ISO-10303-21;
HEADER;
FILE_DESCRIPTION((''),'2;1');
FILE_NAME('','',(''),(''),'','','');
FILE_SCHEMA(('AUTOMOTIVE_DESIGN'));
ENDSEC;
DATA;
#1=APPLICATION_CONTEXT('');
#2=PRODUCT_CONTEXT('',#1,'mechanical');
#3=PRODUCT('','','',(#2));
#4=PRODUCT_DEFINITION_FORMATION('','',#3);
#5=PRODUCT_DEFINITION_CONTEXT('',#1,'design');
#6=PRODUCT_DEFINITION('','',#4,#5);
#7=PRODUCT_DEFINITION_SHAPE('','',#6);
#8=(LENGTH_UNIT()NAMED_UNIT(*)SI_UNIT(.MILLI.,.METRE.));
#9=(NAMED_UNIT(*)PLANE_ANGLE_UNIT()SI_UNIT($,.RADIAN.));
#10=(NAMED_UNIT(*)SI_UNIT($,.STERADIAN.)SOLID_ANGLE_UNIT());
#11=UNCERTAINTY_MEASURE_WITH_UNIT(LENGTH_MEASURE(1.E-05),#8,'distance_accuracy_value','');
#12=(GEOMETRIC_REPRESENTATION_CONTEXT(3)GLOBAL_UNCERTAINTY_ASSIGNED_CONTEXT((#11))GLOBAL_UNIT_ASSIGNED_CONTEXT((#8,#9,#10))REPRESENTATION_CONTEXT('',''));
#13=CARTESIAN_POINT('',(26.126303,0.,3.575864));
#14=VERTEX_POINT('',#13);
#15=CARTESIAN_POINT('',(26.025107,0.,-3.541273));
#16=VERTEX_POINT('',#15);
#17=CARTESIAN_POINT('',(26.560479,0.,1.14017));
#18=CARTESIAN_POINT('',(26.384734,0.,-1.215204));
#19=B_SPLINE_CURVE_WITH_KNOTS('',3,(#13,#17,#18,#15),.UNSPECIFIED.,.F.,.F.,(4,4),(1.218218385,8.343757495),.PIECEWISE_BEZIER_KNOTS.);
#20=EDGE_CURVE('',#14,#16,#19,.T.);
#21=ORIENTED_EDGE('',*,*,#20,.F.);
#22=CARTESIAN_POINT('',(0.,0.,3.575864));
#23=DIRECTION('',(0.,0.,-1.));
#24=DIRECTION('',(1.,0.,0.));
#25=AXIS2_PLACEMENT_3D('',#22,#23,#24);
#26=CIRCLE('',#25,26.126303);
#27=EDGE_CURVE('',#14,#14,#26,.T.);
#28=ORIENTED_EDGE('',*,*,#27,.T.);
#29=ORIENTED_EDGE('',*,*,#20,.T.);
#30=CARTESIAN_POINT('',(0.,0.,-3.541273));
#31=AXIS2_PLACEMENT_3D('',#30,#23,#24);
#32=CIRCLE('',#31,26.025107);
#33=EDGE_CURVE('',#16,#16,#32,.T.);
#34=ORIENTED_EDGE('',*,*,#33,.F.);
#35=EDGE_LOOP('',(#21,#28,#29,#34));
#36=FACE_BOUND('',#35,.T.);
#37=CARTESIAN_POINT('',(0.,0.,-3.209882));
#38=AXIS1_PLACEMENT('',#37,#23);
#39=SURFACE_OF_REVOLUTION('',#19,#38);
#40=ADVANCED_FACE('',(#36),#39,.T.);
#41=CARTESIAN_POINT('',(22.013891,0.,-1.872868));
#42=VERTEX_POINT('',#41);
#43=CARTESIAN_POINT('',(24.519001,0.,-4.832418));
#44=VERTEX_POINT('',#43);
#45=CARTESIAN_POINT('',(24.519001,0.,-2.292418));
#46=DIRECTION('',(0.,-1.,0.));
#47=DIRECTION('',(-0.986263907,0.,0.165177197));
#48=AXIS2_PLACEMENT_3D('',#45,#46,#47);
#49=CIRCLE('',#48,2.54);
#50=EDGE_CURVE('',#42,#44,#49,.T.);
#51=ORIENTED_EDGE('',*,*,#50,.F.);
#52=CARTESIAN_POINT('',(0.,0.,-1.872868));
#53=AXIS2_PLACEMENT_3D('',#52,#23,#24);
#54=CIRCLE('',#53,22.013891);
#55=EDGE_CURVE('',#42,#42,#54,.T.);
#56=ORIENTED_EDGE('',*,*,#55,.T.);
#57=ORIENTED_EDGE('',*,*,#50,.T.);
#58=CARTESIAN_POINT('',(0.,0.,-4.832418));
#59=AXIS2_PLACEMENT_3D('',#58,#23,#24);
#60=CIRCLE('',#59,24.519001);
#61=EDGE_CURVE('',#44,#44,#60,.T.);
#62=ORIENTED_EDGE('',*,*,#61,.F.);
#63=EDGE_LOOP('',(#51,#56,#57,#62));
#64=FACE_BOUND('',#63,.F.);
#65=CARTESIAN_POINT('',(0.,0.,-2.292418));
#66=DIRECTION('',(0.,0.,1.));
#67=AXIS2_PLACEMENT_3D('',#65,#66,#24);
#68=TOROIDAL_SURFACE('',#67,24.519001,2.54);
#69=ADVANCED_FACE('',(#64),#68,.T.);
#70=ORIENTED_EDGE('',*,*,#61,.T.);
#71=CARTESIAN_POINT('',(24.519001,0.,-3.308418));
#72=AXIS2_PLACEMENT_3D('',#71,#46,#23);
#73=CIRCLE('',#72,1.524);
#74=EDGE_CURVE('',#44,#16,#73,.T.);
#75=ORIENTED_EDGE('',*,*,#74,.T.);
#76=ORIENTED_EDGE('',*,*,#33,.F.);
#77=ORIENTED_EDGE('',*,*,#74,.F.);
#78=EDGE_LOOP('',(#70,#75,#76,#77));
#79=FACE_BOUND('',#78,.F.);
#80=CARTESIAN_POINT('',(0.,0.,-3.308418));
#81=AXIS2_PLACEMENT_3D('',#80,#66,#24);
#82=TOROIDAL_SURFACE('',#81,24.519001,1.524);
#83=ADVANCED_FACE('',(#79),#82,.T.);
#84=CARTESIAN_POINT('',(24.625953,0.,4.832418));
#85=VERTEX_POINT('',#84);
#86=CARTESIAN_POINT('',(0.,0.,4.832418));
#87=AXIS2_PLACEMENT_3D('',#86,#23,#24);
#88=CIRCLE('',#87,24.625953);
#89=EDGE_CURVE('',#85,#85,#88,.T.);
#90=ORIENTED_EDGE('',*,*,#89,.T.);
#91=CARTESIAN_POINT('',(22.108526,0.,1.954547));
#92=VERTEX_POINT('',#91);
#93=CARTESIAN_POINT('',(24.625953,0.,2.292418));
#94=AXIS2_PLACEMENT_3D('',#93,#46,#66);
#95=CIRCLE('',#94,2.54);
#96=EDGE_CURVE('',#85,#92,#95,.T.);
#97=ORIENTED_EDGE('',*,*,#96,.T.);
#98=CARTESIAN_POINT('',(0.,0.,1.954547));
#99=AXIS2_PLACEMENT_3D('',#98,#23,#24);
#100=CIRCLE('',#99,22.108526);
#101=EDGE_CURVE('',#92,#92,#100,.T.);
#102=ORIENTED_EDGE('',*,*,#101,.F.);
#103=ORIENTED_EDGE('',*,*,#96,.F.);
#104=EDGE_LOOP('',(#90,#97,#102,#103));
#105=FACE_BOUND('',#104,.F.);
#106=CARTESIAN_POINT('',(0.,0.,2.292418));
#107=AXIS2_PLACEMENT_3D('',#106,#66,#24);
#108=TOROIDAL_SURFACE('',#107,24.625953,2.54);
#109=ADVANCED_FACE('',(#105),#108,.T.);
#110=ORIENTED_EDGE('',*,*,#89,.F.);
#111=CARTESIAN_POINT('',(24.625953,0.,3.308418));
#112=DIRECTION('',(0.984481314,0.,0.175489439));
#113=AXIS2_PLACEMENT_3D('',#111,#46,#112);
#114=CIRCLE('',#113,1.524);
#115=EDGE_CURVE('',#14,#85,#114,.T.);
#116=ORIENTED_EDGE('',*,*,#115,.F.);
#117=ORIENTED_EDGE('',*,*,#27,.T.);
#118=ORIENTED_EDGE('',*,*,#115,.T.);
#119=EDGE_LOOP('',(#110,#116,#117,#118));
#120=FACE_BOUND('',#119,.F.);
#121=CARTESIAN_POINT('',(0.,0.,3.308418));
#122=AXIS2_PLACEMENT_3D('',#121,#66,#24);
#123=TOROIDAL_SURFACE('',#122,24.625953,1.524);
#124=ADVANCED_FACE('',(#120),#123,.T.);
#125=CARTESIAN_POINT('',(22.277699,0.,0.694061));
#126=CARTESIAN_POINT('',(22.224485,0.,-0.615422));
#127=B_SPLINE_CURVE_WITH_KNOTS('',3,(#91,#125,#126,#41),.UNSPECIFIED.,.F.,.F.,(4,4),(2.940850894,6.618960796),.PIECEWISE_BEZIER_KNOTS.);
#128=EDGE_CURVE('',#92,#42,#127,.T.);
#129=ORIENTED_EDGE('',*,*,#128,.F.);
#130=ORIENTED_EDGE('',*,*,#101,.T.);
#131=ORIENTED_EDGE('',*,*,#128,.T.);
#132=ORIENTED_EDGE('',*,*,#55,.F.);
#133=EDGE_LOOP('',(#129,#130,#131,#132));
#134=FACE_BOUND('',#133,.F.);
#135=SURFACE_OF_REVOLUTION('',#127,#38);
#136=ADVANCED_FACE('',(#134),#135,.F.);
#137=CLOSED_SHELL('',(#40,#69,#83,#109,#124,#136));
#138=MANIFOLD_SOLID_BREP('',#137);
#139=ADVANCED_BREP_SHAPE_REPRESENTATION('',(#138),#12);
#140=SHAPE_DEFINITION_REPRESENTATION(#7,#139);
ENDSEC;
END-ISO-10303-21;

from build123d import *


# Not quite as in the source:
# - a feature names something its author has since deleted; it is built from what else it names


with BuildPart() as f2:
    # F1 (on Front) → F2 (revolve)
    with BuildSketch(Plane.XZ):
        with BuildLine():
            add(Edge.make_bspline(
                [(26.1263029407, 3.5758643896), (26.5604794287, 1.1401700187), (26.3847344036, -1.2152037465), (26.0251071477, -3.5412733739)],
                knots=[1.218218385, 1.218218385, 1.218218385, 1.218218385, 8.3437574948, 8.3437574948, 8.3437574948, 8.3437574948], degree=3))
            ThreePointArc((26.1263029407, 3.5758643896), (25.604469755, 4.4767856269), (24.6259534188, 4.8324184843))
            ThreePointArc((24.6259534188, 4.8324184843), (22.7141751468, 3.9647533307), (22.1085255267, 1.9545474911))
            add(Edge.make_bspline(
                [(22.1085255267, 1.9545474911), (22.2776988691, 0.6940613902), (22.2244853035, -0.6154217727), (22.0138910514, -1.8728684042)],
                knots=[2.940850894, 2.940850894, 2.940850894, 2.940850894, 6.6189607965, 6.6189607965, 6.6189607965, 6.6189607965], degree=3))
            ThreePointArc((22.0138910514, -1.8728684042), (22.580283086, -3.9334460277), (24.5190013744, -4.8324184843))
            ThreePointArc((24.5190013744, -4.8324184843), (25.5108948032, -4.4654506471), (26.0251071477, -3.5412733739))
        make_face()
    revolve(axis=Axis((0, 0, -3.2098824158), (0, 0, -1)))


solid = f2.part
